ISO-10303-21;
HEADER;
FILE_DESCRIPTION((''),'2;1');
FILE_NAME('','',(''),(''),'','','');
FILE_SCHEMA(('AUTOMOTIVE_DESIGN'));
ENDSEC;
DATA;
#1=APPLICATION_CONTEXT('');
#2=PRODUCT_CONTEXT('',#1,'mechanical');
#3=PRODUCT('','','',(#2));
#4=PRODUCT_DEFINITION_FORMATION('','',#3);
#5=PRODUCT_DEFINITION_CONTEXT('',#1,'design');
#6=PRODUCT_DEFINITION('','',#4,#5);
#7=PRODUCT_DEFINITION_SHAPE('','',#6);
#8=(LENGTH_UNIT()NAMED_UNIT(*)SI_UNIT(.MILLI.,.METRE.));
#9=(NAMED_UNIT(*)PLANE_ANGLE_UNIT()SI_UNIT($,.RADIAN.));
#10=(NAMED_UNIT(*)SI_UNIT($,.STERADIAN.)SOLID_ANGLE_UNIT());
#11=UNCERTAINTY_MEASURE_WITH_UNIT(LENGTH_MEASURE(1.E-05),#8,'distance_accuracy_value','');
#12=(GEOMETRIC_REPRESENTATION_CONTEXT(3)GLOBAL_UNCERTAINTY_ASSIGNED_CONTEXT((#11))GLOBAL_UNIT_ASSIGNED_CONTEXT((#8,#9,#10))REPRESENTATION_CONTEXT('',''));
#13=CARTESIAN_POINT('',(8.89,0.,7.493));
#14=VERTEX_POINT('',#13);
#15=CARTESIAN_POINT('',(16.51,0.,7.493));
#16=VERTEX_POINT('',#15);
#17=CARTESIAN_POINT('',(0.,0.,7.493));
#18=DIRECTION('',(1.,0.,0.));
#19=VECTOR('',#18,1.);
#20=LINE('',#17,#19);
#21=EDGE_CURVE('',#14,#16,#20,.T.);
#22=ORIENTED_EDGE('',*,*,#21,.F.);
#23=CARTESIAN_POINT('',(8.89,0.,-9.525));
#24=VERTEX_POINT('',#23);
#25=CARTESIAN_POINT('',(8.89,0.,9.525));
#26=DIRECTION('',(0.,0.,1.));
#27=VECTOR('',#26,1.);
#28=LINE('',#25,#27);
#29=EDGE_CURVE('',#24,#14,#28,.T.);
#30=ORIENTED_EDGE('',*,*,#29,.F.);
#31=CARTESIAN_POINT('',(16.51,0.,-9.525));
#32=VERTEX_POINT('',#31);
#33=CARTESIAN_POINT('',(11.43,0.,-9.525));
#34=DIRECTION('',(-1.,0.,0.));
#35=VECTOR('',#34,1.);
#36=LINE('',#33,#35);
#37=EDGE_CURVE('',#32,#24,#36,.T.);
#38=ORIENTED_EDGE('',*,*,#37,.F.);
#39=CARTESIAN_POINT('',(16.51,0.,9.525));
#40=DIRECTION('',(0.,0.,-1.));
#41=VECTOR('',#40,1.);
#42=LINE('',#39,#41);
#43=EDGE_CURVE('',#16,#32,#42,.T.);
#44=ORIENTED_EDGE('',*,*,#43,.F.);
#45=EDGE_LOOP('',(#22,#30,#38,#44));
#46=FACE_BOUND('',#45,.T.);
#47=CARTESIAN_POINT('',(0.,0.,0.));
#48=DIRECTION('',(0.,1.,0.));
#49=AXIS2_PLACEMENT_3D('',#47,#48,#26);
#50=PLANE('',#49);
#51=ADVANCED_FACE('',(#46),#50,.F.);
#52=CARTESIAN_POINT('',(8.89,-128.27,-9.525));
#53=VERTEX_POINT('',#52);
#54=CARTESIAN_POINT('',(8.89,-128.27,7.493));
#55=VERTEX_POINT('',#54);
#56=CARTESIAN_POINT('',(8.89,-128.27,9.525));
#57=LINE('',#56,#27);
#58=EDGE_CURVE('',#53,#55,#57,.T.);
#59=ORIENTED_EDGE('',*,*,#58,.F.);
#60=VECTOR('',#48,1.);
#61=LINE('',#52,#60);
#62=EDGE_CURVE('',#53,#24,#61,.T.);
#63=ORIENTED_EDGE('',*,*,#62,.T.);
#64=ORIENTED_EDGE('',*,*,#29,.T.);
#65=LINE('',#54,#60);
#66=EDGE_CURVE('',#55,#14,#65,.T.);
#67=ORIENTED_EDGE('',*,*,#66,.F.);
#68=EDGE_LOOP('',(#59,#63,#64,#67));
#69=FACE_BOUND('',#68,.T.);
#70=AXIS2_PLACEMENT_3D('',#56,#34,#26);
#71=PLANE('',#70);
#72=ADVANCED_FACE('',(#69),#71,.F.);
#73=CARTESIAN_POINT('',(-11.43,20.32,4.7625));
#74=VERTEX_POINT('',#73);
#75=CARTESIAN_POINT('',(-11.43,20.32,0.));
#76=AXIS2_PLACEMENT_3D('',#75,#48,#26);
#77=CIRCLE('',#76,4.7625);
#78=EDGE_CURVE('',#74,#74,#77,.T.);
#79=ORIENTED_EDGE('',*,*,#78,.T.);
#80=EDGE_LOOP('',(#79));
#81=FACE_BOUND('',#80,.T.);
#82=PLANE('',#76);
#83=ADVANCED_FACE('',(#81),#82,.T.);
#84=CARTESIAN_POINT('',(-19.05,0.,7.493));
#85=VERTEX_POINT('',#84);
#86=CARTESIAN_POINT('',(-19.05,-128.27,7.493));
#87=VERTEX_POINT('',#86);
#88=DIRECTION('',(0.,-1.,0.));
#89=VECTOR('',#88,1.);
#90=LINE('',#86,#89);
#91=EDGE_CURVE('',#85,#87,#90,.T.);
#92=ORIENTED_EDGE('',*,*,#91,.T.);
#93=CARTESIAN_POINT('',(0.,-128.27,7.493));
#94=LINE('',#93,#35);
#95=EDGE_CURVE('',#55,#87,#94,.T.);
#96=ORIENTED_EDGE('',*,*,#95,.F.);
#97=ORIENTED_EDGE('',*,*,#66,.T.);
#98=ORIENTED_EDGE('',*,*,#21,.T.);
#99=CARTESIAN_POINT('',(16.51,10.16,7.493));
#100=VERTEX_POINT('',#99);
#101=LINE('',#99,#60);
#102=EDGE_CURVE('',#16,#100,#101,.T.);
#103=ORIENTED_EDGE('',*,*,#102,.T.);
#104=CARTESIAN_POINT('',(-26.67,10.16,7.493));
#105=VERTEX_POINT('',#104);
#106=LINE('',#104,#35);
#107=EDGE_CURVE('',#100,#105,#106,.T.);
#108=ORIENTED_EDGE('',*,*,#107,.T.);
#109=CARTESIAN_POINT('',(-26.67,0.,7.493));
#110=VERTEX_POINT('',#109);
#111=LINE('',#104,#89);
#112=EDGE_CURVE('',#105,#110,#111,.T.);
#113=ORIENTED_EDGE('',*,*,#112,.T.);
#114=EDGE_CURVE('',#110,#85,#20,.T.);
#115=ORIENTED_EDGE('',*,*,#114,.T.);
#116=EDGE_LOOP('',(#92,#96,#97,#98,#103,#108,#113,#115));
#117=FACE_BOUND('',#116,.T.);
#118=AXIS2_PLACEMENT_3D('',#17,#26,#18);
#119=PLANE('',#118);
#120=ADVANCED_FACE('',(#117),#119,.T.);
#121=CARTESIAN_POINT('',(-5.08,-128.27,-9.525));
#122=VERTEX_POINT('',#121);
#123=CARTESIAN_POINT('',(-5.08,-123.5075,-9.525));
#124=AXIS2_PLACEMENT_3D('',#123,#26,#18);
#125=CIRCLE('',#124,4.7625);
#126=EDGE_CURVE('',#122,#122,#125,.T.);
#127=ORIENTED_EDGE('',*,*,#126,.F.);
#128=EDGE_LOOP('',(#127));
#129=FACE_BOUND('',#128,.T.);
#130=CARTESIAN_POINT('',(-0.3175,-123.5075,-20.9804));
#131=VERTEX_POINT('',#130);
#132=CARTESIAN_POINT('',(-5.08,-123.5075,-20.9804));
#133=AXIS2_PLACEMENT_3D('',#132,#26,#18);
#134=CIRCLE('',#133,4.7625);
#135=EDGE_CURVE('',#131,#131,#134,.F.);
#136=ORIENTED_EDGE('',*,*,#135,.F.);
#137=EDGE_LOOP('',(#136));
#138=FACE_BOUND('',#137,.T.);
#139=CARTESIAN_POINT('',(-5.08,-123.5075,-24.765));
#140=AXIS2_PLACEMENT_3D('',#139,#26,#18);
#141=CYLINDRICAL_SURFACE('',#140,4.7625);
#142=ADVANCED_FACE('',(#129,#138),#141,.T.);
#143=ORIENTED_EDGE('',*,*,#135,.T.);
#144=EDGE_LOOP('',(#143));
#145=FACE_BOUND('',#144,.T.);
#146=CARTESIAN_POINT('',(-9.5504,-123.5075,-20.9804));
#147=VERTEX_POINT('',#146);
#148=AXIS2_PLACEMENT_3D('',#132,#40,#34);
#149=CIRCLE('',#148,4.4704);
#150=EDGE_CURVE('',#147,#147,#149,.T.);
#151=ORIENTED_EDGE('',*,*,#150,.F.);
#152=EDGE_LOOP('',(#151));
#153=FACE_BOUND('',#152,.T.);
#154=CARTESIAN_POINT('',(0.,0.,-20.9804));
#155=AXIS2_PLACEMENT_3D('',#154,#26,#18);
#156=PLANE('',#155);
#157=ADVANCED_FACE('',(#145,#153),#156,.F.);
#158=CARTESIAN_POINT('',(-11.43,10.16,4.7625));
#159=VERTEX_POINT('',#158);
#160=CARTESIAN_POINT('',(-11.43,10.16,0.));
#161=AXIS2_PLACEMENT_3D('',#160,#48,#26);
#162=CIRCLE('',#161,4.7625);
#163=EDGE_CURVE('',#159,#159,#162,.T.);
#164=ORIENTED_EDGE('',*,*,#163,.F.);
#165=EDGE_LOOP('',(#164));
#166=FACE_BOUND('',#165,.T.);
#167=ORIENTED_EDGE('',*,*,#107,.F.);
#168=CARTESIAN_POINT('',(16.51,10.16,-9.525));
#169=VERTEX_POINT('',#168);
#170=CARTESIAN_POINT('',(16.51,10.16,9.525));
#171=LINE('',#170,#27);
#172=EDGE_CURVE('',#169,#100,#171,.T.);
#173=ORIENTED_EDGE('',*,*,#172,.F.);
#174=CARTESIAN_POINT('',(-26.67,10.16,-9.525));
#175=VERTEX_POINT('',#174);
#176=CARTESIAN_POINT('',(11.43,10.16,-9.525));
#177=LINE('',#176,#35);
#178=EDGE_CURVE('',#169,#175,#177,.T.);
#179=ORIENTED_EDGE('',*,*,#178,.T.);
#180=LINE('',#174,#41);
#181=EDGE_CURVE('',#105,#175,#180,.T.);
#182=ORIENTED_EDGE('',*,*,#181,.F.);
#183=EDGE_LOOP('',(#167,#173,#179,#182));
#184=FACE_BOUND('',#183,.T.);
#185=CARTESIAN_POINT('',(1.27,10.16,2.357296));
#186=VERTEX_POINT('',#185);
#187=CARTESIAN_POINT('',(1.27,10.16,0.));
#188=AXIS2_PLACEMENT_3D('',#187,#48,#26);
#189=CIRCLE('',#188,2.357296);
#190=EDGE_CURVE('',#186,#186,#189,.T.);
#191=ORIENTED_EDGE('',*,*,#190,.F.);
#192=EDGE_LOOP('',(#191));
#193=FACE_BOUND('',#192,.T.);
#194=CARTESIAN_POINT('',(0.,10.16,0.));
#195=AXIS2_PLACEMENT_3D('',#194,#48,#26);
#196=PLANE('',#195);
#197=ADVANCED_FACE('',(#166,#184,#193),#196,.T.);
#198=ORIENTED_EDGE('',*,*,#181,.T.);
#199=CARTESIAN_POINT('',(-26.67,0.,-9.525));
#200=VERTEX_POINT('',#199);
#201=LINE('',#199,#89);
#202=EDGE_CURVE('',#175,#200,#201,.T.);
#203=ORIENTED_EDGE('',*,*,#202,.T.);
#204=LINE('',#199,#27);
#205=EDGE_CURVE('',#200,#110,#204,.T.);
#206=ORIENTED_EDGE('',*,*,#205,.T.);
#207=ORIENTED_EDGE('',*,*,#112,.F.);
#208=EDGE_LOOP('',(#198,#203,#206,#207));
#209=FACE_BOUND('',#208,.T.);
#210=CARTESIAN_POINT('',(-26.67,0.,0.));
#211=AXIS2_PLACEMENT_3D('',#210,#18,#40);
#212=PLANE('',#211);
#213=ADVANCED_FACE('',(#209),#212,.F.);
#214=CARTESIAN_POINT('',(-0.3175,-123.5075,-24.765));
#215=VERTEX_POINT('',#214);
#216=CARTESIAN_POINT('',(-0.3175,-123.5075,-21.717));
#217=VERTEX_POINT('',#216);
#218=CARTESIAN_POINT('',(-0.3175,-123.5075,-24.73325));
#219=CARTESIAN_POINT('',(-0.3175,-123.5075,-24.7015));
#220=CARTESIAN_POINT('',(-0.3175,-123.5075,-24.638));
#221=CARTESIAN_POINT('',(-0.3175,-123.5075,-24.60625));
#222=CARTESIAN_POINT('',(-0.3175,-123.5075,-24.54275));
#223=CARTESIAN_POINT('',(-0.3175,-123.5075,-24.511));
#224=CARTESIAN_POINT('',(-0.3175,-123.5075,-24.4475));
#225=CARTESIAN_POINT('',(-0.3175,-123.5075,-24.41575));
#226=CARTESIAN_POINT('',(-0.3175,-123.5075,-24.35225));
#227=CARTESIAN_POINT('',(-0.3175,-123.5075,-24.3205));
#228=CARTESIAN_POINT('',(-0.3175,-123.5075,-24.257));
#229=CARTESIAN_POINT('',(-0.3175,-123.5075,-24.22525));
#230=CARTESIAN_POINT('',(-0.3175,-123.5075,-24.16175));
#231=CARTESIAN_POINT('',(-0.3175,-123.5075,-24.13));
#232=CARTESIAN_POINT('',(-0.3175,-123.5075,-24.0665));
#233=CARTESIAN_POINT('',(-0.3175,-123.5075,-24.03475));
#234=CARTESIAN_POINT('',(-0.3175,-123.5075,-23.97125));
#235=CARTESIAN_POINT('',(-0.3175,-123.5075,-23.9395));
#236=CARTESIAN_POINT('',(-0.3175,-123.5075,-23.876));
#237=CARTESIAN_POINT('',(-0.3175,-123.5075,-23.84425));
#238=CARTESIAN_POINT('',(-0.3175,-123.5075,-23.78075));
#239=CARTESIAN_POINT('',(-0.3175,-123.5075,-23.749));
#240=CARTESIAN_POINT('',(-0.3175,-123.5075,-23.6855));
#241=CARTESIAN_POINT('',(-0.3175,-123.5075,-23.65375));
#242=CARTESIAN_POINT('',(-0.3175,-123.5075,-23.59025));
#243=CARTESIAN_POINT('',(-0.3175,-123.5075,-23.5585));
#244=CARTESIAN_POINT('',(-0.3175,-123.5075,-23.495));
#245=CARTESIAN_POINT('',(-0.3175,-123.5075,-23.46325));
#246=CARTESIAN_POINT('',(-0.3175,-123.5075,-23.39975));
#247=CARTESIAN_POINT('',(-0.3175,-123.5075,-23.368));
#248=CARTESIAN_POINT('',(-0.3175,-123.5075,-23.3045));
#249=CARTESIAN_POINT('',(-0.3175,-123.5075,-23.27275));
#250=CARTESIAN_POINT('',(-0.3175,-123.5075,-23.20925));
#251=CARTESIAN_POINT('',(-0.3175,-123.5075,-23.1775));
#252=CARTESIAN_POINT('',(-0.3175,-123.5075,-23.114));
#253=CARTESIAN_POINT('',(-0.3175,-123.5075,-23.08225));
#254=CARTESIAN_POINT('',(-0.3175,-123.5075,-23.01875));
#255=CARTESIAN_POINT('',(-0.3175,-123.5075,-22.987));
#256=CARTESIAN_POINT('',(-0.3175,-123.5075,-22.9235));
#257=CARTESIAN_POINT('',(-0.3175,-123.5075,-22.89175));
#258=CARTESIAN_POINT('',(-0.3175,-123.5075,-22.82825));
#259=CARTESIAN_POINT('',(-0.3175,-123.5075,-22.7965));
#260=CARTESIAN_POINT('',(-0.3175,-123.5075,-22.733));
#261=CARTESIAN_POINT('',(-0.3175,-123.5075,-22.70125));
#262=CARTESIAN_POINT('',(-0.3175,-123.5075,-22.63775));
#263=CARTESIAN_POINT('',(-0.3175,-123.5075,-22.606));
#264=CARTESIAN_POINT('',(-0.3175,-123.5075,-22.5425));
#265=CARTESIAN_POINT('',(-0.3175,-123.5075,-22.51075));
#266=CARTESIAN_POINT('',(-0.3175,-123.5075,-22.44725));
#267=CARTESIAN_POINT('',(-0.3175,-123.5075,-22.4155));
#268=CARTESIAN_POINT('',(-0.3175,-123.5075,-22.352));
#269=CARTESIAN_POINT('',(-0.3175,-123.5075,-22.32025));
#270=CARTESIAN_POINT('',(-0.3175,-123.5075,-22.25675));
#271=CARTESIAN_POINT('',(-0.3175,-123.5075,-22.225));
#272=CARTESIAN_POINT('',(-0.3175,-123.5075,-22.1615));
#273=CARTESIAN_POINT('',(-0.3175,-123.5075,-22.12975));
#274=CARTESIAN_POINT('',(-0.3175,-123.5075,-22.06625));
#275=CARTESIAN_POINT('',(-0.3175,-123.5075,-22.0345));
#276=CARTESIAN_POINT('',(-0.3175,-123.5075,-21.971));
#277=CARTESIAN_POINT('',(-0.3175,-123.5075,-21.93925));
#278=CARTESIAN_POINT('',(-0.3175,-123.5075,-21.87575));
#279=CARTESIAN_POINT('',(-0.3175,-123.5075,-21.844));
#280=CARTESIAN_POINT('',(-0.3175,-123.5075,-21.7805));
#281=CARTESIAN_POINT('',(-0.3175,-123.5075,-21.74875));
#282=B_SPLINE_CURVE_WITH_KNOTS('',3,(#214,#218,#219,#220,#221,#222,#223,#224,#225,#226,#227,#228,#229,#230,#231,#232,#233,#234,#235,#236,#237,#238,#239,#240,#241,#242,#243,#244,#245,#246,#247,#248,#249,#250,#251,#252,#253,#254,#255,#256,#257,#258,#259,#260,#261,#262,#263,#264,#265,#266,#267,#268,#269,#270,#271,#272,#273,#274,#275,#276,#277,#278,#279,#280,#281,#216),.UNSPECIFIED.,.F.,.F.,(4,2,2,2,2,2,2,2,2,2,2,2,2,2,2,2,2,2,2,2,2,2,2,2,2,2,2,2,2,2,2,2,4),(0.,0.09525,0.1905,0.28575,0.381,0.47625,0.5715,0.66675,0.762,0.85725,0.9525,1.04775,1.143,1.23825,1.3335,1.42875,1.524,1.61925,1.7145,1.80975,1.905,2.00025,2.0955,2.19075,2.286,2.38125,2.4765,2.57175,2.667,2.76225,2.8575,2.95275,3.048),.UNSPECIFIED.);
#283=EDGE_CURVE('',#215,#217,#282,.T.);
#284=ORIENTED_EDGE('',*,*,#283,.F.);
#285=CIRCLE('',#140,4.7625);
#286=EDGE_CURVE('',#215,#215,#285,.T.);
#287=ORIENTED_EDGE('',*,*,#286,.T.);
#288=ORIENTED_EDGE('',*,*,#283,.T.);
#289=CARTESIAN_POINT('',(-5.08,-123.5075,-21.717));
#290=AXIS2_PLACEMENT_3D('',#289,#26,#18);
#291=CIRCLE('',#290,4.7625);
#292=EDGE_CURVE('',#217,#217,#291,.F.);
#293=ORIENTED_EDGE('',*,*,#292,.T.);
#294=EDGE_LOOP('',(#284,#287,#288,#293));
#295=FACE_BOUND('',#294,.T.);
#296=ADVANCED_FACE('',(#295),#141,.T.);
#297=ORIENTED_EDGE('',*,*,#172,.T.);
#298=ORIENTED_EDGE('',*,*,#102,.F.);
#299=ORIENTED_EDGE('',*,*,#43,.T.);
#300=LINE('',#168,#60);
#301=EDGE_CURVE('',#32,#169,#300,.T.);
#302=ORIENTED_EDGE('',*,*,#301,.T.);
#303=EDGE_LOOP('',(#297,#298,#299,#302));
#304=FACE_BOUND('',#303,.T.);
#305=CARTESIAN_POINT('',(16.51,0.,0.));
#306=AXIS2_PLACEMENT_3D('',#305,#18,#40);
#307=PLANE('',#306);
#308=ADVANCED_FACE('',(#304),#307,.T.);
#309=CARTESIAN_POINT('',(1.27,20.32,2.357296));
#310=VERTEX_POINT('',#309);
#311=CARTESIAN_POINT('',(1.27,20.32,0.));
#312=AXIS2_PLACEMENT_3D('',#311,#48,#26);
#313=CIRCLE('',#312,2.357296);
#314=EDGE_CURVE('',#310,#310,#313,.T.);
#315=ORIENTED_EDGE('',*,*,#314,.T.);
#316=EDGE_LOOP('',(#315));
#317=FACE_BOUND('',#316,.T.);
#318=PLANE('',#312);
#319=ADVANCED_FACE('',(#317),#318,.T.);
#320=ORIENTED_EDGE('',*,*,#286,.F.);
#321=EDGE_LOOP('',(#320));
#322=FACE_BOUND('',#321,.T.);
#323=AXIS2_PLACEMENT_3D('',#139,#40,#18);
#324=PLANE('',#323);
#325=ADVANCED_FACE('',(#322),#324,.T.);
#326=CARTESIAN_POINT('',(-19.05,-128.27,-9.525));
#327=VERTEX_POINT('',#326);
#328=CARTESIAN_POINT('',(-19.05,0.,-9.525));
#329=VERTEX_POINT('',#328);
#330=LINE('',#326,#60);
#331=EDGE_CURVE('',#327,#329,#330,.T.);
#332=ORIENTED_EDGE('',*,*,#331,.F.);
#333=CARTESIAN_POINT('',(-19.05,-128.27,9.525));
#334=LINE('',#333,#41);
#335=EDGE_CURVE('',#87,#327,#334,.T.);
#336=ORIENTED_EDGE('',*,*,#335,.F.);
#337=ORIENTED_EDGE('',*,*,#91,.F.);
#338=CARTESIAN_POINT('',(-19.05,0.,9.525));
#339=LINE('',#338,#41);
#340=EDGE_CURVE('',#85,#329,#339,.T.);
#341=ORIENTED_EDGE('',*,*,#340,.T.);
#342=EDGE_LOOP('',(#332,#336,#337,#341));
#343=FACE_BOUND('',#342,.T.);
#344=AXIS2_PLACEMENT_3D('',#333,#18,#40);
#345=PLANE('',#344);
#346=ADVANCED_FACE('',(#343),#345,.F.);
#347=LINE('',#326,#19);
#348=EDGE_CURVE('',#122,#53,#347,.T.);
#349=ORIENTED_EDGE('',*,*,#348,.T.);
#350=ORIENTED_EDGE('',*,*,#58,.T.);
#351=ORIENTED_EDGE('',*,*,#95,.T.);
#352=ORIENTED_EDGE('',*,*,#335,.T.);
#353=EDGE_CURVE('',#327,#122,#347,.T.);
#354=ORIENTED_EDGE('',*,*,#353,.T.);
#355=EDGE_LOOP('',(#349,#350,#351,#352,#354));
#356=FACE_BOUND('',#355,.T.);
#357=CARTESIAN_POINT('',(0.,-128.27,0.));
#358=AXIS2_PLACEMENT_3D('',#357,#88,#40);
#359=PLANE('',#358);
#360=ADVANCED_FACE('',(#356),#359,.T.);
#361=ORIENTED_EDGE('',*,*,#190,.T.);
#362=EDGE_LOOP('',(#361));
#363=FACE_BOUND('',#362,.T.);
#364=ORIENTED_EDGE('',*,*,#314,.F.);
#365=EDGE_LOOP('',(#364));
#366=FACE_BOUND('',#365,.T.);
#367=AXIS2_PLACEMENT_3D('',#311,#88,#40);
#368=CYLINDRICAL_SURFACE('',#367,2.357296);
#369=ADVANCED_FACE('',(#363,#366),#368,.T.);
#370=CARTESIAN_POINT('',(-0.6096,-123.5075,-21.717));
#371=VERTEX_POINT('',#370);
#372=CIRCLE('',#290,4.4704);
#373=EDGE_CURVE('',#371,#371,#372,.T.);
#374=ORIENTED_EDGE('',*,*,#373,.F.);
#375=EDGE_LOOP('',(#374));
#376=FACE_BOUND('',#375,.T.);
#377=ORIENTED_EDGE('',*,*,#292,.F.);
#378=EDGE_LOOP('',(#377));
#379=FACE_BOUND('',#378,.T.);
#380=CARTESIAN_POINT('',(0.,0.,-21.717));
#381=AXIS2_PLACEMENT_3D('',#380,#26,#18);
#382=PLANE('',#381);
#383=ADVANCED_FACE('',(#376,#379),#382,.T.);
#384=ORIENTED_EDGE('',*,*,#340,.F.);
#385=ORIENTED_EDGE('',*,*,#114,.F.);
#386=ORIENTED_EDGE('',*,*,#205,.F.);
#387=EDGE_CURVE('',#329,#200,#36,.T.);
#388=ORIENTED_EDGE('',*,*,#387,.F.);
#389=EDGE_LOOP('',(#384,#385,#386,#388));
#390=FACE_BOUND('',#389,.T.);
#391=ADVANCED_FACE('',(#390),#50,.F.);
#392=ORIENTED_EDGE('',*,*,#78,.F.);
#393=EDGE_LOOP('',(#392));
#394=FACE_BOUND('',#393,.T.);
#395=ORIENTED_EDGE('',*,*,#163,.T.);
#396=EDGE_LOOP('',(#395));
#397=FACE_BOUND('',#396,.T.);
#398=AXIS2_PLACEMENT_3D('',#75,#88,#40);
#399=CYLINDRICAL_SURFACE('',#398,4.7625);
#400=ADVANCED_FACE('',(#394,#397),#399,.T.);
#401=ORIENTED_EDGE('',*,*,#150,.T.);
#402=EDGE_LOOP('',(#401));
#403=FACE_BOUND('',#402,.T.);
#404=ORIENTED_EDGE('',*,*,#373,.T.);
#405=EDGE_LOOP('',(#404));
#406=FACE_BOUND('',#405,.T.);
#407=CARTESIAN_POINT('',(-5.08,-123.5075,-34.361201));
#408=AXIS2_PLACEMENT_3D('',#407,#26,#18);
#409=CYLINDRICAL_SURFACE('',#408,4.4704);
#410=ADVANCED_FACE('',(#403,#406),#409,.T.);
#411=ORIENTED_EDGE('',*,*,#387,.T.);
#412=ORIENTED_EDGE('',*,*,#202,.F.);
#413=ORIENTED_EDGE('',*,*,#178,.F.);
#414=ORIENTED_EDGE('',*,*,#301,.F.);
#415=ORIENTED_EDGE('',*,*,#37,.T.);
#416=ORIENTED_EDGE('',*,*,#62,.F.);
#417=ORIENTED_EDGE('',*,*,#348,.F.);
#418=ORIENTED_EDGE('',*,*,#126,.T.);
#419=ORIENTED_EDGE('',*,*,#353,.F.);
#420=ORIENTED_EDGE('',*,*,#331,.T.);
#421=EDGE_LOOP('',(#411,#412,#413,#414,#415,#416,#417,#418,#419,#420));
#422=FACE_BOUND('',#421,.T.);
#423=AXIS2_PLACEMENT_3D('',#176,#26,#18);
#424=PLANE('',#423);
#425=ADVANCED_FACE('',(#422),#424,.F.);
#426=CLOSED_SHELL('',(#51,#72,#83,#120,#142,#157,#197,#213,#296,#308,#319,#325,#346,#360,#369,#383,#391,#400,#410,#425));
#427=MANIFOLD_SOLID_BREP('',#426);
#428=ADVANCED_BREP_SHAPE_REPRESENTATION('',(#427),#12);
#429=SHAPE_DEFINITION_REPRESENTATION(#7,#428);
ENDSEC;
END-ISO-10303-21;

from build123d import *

# Parameters (mm, degrees)
SKETCH1_W              = 33.02
SKETCH1_H              = 19.05
BOSS_EXTRUDE1_DEPTH    = 10.16
SKETCH2_R              = 4.7625
SKETCH2_R_2            = 2.357295936
BOSS_EXTRUDE2_DEPTH    = 10.16
SKETCH5_W              = 19.05
SKETCH5_H              = 10.16
BOSS_EXTRUDE3_DEPTH    = 5.08
SKETCH6_W              = 19.05
SKETCH6_H              = 10.16
BOSS_EXTRUDE4_DEPTH    = 5.08
SKETCH7_W              = 27.94
SKETCH7_H              = 19.05
BOSS_EXTRUDE5_DEPTH    = 128.27
SKETCH9_R              = 4.7625
BOSS_EXTRUDE6_DEPTH    = 15.24
CUT_EXTRUDE3_START     = -21.717
CUT_EXTRUDE3_OUTLINE_R = 4.7625
CUT_EXTRUDE3_DEPTH     = 0.7366
SKETCH13_R             = 4.4704
BOSS_EXTRUDE8_DEPTH    = 0.7366
SKETCH14_W             = 27.94
SKETCH14_H             = 10.16
CUT_EXTRUDE4_DEPTH     = 15.24
SKETCH15_W             = 43.18
SKETCH15_H             = 138.43
CUT_EXTRUDE5_DEPTH     = 2.032


# Read off the part's stored shape, not the designer's step: Cut-Extrude3
with BuildPart() as part:
    # Sketch1 → Boss-Extrude1 (new body)
    with BuildSketch(Plane(origin=(0, 0, 0), x_dir=(1, 0, 0), z_dir=(0, 1, 0))):
        with Locations((-5.08, 0)):
            Rectangle(SKETCH1_W, SKETCH1_H)
    extrude(amount=BOSS_EXTRUDE1_DEPTH)

    # Sketch2 → Boss-Extrude2 (add)
    with BuildSketch(Plane(origin=(0, 10.16, 0), x_dir=(1, 0, 0), z_dir=(0, 1, 0))):
        with Locations(Location((-11.43, 0, 0), (0, 0, 270))):
            Circle(SKETCH2_R)
        with Locations(Location((1.27, 0, 0), (0, 0, 270))):
            Circle(SKETCH2_R_2)
    extrude(amount=BOSS_EXTRUDE2_DEPTH)

    # Sketch5 → Boss-Extrude3 (add)
    with BuildSketch(Plane.ZY.offset(21.59)):
        with Locations((0, 5.08)):
            Rectangle(SKETCH5_W, SKETCH5_H)
    extrude(amount=BOSS_EXTRUDE3_DEPTH)

    # Sketch6 → Boss-Extrude4 (add)
    with BuildSketch(Plane(origin=(11.43, 0, 0), x_dir=(0, 0, -1), z_dir=(1, 0, 0))):
        with Locations((0, 5.08)):
            Rectangle(SKETCH6_W, SKETCH6_H)
    extrude(amount=BOSS_EXTRUDE4_DEPTH)

    # Sketch7 → Boss-Extrude5 (add)
    with BuildSketch(Plane(origin=(0, 0, 0), x_dir=(-1, 0, 0), z_dir=(0, -1, 0))):
        with Locations((5.08, 0)):
            Rectangle(SKETCH7_W, SKETCH7_H)
    extrude(amount=BOSS_EXTRUDE5_DEPTH)

    # Sketch9 → Boss-Extrude6 (add)
    with BuildSketch(Plane.XY.offset(9.525)):
        with Locations(Location((-5.08, -123.5075, 0), (0, 0, 270))):
            Circle(SKETCH9_R)
    boss_extrude6 = extrude(amount=BOSS_EXTRUDE6_DEPTH)

    # Mirror5: Boss-Extrude6 across plane
    add(boss_extrude6.mirror(Plane.XY))

    # Cut-Extrude3 outline → Cut-Extrude3 (cut)
    with BuildSketch(Plane.XY.offset(CUT_EXTRUDE3_START)):
        with Locations((-5.08, -123.5075)):
            Circle(CUT_EXTRUDE3_OUTLINE_R)
    extrude(amount=CUT_EXTRUDE3_DEPTH, mode=Mode.SUBTRACT)

    # Sketch13 → Boss-Extrude8 (add)
    with BuildSketch(Plane(origin=(0, 0, -20.9804), x_dir=(-1, 0, 0), z_dir=(0, 0, -1))):
        with Locations(Location((5.08, -123.5075, 0), (0, 0, 180))):
            Circle(SKETCH13_R)
    extrude(amount=BOSS_EXTRUDE8_DEPTH)

    # Sketch14 → Cut-Extrude4 (cut)
    with BuildSketch(Plane.XY.offset(9.525)):
        with Locations((-5.08, -123.19)):
            Rectangle(SKETCH14_W, SKETCH14_H)
    extrude(amount=CUT_EXTRUDE4_DEPTH, mode=Mode.SUBTRACT)

    # Sketch15 → Cut-Extrude5 (cut)
    with BuildSketch(Plane.XY.offset(9.525)):
        with Locations((-5.08, -59.055)):
            Rectangle(SKETCH15_W, SKETCH15_H)
    extrude(amount=-CUT_EXTRUDE5_DEPTH, mode=Mode.SUBTRACT)


solid = part.part
